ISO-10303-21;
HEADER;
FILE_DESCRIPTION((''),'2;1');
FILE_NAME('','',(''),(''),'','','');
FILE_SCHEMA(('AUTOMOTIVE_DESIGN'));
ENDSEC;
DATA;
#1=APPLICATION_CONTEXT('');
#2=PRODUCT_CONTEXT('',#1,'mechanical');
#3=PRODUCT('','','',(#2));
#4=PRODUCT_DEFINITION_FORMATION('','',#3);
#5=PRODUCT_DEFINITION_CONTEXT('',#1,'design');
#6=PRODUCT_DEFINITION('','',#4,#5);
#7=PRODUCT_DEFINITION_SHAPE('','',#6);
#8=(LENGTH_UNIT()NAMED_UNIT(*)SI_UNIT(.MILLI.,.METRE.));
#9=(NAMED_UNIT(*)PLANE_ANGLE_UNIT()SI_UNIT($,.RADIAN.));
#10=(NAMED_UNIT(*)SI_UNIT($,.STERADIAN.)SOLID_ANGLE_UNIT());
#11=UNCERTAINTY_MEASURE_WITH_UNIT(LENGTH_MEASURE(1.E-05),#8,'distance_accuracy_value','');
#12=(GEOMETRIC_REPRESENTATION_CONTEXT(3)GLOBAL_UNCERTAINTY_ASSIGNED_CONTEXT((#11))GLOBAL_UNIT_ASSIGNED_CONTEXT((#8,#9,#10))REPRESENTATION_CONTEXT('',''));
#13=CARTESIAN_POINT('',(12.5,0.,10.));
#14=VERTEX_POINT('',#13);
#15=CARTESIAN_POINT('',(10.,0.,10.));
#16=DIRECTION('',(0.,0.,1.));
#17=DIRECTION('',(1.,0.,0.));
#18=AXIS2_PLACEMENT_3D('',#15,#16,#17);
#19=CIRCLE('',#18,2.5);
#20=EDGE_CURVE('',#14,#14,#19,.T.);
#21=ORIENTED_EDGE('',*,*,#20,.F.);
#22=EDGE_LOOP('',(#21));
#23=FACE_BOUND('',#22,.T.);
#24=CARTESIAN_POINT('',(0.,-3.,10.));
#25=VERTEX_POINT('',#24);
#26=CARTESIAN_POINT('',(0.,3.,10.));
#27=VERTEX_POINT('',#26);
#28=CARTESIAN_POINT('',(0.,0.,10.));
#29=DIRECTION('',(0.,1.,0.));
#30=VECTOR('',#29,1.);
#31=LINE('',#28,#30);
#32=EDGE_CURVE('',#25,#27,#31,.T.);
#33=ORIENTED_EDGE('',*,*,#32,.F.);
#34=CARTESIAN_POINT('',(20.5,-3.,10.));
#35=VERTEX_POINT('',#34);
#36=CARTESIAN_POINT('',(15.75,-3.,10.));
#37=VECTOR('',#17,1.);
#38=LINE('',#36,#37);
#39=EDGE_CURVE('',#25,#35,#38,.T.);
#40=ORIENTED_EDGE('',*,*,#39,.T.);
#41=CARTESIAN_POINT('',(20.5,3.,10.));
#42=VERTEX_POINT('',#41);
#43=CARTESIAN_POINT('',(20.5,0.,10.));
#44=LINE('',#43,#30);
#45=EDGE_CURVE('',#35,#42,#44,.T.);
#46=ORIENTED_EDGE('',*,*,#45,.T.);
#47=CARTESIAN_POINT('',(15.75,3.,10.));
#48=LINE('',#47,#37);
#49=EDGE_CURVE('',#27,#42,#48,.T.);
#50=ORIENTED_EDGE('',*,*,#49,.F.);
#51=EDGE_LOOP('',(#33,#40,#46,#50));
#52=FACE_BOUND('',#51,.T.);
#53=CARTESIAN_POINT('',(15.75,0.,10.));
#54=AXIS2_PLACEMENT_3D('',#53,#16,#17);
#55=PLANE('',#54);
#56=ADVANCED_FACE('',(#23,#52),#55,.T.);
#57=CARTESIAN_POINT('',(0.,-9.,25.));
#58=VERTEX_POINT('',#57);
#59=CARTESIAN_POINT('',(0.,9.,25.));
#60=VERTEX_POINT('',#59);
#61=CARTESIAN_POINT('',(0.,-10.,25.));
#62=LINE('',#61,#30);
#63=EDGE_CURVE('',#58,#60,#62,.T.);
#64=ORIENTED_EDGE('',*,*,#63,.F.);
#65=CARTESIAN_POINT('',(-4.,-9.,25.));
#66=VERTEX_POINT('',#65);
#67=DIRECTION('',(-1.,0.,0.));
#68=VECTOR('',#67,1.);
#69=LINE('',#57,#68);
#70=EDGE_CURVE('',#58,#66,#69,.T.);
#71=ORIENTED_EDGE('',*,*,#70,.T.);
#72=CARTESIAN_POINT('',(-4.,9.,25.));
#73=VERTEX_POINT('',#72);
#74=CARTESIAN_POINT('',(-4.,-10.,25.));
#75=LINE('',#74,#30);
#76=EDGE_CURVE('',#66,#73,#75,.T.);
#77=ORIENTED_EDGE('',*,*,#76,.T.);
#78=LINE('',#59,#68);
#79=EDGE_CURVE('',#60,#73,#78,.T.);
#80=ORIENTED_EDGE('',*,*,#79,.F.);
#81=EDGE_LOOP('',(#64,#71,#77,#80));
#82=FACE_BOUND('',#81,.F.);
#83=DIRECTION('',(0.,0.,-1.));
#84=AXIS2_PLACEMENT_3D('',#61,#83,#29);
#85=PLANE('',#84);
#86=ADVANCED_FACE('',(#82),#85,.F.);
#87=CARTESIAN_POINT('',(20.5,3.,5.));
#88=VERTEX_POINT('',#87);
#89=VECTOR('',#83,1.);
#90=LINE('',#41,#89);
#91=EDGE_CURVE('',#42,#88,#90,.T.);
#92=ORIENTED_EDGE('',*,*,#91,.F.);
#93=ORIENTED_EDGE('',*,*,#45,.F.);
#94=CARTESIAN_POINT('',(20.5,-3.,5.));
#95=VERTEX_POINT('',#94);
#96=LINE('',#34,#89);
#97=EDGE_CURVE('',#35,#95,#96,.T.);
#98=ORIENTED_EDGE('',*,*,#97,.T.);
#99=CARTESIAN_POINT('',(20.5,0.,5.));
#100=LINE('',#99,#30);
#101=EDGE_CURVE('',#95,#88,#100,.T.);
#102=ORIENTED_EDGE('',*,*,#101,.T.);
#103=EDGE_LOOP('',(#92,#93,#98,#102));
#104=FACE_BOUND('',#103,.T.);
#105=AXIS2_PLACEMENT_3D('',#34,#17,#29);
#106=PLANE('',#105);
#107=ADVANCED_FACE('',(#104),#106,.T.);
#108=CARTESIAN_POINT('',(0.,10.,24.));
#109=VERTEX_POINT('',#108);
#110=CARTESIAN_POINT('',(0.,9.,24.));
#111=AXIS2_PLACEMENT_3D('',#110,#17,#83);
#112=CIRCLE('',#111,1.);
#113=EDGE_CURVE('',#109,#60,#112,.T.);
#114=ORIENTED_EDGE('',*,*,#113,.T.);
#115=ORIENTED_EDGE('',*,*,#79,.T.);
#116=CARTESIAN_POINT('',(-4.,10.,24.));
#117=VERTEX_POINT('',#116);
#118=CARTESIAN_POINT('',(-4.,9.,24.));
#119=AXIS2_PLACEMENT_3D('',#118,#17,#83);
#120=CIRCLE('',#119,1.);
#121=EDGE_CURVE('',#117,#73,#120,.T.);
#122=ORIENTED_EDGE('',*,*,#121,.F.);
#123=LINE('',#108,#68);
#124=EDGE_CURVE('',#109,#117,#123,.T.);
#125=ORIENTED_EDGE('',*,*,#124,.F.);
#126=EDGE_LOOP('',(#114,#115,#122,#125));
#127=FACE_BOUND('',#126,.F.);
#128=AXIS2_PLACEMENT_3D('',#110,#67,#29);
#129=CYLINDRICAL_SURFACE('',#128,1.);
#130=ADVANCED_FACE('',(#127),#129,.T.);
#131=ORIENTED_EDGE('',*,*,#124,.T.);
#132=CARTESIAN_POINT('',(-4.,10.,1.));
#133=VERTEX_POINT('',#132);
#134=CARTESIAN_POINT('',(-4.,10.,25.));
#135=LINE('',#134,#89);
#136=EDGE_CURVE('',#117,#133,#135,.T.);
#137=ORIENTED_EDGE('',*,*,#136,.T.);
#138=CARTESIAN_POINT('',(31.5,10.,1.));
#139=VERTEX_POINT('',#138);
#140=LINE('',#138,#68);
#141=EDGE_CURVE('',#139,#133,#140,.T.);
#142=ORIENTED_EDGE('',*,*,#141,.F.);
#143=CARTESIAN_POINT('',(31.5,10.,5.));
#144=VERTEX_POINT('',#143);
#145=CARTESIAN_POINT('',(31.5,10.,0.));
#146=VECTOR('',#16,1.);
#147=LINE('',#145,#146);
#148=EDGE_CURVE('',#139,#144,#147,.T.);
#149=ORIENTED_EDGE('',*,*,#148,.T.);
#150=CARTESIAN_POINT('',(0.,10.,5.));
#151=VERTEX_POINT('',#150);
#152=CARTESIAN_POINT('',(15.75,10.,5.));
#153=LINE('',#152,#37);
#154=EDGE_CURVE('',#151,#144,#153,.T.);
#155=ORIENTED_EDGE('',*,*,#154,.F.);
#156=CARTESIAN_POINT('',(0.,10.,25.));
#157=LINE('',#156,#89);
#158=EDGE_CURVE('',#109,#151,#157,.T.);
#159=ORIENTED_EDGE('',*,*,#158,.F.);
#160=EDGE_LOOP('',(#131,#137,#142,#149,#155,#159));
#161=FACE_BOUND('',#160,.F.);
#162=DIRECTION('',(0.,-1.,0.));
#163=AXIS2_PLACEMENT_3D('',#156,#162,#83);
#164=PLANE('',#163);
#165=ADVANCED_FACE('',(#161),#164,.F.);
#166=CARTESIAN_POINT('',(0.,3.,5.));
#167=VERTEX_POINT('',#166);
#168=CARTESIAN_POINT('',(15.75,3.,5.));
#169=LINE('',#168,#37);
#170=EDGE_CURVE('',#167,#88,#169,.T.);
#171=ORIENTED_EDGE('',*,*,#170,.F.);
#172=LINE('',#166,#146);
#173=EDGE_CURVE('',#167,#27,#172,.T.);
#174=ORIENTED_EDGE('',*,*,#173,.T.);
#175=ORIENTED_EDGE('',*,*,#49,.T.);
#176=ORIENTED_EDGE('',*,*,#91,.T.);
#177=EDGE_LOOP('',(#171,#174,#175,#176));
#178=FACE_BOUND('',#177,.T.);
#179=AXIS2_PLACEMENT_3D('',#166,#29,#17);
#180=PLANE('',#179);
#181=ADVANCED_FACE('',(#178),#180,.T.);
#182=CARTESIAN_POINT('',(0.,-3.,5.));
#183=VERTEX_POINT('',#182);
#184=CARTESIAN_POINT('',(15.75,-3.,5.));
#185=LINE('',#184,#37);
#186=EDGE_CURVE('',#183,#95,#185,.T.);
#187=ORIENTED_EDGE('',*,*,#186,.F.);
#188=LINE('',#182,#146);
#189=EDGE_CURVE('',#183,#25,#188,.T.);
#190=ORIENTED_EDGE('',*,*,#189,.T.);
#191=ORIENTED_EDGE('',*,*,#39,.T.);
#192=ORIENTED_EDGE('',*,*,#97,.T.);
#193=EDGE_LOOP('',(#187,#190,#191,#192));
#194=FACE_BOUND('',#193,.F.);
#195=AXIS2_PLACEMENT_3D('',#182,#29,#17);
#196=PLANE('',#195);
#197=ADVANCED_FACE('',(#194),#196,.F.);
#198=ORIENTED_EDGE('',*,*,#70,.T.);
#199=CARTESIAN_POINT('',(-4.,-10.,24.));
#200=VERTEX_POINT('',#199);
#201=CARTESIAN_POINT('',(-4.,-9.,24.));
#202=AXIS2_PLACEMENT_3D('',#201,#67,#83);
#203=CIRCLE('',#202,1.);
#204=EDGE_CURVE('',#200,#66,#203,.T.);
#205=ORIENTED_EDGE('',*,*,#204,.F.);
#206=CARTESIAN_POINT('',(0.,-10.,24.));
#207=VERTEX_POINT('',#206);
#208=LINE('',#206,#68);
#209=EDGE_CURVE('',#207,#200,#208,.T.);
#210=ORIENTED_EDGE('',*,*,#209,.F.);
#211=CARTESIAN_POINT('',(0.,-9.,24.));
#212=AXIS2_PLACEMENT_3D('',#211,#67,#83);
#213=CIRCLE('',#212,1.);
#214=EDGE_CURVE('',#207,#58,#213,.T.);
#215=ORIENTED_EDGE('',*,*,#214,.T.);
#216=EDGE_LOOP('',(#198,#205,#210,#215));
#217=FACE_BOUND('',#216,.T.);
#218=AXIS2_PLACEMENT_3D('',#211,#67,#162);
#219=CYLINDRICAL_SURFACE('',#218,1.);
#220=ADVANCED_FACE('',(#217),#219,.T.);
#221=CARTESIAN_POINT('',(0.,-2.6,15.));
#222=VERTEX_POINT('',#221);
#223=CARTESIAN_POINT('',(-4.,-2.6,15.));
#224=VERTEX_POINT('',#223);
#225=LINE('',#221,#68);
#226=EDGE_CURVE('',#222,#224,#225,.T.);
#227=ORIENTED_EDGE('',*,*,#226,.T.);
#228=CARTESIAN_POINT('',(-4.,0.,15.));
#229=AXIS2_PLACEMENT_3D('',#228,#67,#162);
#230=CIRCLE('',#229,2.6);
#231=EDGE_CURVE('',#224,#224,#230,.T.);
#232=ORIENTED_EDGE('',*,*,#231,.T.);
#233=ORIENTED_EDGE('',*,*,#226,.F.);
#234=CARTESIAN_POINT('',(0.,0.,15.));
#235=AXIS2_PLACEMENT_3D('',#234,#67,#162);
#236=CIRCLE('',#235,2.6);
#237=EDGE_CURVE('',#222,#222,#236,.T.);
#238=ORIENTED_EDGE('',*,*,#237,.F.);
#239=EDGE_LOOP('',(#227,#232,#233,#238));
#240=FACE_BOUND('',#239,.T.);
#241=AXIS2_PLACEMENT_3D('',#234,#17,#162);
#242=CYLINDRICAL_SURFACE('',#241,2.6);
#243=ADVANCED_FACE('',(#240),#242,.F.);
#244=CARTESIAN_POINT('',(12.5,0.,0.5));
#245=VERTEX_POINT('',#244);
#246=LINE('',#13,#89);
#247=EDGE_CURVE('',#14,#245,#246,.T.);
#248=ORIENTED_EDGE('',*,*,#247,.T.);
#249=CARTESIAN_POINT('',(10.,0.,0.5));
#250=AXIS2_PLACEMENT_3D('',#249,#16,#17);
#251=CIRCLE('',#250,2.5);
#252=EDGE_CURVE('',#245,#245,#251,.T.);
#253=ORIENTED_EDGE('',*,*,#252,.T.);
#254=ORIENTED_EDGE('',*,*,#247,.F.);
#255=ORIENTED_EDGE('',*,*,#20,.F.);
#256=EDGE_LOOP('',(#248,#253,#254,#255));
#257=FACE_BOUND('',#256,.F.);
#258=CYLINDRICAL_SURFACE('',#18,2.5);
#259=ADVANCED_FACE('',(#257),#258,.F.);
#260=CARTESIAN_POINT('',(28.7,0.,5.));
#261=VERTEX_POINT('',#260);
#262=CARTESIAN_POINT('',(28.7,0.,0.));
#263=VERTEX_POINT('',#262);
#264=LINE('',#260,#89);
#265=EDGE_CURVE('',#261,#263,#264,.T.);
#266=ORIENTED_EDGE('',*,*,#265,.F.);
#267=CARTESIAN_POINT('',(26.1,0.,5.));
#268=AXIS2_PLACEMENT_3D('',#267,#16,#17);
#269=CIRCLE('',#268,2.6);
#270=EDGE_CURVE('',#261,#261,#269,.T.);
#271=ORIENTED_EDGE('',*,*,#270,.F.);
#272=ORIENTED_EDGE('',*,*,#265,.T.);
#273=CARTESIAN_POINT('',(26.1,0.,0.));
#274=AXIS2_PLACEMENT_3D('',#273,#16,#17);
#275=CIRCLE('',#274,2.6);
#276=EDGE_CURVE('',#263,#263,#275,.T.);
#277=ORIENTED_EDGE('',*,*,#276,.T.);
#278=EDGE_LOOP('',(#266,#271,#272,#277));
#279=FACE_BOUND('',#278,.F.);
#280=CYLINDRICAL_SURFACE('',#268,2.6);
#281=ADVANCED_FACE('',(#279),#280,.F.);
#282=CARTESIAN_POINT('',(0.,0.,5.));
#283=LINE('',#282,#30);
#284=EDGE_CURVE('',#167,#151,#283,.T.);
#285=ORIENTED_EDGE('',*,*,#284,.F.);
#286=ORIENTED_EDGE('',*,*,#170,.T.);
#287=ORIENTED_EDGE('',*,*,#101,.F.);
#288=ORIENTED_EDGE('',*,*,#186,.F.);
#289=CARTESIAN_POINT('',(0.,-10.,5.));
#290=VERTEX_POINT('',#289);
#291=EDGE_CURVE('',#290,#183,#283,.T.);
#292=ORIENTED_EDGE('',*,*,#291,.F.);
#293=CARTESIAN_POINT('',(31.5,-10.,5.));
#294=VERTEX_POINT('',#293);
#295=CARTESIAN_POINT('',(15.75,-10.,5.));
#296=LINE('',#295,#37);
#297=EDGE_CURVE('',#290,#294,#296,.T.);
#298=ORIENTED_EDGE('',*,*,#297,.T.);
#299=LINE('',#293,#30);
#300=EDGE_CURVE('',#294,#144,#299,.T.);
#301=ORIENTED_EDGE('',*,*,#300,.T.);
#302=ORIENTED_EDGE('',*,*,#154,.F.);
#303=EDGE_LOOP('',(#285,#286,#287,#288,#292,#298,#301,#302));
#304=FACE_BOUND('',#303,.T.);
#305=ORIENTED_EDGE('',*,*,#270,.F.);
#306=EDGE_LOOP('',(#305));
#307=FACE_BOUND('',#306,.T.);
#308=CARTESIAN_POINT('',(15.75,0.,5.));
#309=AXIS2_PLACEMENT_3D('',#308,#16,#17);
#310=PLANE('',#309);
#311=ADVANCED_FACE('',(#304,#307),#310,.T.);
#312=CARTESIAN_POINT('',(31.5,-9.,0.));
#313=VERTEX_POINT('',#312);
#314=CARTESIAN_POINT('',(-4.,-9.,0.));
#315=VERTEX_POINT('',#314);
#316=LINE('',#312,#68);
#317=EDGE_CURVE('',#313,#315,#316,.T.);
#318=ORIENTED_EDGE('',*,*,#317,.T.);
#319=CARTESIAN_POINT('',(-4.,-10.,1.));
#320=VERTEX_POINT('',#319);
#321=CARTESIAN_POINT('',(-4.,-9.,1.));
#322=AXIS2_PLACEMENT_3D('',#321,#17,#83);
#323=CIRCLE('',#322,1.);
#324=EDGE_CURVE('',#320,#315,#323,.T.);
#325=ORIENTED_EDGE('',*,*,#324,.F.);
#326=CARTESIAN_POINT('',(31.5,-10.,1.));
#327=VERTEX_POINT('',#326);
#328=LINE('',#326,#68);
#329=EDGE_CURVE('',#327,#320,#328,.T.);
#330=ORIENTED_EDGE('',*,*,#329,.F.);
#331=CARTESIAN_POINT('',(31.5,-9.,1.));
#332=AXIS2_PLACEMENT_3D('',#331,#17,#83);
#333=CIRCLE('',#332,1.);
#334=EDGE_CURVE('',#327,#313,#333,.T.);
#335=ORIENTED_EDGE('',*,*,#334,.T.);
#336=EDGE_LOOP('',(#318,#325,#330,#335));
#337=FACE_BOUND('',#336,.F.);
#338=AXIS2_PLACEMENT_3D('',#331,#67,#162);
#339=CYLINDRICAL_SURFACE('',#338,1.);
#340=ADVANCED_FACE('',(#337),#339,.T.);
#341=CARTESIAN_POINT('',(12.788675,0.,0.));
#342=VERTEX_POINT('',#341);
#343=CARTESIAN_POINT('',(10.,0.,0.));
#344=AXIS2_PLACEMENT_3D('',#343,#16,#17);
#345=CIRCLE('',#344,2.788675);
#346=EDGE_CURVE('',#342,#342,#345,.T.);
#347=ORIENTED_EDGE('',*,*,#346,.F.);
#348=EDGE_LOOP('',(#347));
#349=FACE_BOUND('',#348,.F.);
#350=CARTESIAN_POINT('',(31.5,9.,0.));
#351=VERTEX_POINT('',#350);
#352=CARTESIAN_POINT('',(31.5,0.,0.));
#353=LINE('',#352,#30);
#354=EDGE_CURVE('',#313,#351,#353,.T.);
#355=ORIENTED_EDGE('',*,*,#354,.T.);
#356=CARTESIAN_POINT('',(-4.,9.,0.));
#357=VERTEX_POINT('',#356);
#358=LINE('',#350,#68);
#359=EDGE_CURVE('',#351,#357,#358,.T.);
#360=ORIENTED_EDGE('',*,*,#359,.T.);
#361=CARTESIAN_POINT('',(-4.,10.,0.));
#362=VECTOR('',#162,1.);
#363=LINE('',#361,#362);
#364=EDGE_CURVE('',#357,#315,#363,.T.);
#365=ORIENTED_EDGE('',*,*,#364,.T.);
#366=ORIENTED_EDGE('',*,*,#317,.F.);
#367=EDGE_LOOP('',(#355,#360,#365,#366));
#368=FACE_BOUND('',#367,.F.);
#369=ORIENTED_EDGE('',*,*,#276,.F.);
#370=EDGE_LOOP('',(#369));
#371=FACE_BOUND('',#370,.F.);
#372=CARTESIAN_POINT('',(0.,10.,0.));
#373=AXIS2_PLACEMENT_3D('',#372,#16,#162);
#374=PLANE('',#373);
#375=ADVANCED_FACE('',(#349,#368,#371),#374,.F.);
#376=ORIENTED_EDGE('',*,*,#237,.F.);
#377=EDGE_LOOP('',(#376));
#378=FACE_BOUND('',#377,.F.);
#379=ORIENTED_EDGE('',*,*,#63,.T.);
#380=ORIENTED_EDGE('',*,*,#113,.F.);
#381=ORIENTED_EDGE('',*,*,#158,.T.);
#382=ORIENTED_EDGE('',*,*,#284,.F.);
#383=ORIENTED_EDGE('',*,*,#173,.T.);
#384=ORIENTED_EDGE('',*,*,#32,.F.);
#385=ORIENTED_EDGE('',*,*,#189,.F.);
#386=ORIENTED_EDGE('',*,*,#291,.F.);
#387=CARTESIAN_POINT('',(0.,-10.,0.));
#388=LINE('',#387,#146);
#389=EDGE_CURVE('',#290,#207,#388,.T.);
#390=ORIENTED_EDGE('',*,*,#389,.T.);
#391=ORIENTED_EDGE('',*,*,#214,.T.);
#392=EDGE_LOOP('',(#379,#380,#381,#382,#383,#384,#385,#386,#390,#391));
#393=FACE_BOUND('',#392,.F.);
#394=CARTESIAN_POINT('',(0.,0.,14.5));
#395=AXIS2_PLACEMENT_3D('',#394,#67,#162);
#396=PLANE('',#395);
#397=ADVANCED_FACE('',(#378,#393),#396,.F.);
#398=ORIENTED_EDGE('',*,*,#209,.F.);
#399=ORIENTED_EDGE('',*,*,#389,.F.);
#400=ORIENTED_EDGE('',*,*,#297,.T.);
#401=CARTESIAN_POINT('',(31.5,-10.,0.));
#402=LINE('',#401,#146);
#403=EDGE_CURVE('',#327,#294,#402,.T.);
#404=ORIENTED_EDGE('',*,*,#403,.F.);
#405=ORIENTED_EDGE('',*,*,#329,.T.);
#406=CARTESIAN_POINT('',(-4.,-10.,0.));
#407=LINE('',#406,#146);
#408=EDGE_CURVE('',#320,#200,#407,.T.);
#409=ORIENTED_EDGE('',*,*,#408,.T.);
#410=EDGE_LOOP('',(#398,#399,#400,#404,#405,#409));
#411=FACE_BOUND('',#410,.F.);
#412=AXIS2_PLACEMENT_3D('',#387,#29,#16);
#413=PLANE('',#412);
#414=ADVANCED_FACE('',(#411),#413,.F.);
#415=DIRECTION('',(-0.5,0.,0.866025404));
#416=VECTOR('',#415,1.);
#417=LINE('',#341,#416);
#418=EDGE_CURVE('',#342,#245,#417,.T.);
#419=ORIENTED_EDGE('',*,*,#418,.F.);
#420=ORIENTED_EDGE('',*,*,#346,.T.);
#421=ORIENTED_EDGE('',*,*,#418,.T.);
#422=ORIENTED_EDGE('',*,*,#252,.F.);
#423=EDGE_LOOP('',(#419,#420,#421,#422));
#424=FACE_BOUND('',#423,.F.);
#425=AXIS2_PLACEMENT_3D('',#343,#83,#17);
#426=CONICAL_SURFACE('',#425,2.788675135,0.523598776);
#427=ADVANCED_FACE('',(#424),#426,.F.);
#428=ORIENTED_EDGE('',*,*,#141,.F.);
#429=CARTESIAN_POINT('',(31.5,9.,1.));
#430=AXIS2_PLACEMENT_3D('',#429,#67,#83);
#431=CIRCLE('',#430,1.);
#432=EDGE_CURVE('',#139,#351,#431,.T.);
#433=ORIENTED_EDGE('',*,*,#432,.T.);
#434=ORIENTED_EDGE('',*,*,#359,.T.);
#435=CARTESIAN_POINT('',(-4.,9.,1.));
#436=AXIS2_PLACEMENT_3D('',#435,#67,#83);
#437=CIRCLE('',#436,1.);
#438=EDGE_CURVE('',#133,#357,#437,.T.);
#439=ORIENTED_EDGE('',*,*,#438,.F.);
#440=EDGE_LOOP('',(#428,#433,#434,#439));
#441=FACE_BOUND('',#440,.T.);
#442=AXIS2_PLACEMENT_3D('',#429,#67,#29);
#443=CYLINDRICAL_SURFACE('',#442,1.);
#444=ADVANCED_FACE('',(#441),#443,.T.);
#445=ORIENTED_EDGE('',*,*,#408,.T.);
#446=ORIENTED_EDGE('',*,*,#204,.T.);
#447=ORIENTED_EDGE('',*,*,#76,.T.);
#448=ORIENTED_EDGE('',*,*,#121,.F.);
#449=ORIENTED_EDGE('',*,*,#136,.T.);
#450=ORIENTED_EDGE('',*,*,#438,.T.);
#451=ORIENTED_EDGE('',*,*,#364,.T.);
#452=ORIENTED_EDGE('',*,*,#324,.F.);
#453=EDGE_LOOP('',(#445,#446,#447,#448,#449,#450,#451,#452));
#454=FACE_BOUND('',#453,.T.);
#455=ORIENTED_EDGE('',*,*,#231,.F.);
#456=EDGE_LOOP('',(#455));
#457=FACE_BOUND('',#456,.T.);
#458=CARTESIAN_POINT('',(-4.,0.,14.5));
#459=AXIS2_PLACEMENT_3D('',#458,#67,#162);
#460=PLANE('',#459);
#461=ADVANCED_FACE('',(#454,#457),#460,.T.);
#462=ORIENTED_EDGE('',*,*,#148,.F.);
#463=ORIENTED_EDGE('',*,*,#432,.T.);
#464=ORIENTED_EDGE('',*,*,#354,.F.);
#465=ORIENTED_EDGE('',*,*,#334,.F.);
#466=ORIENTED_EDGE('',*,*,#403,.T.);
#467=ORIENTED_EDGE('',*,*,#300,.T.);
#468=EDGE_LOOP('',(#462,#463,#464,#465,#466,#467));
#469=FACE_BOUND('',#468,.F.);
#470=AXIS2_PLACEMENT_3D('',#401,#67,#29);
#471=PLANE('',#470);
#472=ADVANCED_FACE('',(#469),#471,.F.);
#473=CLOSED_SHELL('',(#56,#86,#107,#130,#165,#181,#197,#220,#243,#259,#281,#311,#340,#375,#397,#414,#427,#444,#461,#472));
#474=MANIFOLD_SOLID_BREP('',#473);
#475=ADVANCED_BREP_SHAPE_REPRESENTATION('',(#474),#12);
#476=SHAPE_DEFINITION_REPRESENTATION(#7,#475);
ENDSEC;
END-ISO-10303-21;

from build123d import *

# Parameters (mm, degrees)
F0_W      = 31.5
F0_H      = 20
F1_DEPTH  = 5
F2_W      = 31.5
F2_H      = 6
F3_DEPTH  = 5
F4_R      = 2.5
F5_DEPTH  = 25
F6_W      = 11.2
F6_H      = 6
F7_DEPTH  = 5
F8_R      = 2.6
F9_DEPTH  = 5
F10_R     = 2.6
F11_DEPTH = 4
F12_R     = 1


# Not quite as in the source:
# - a fillet or chamfer that OpenCascade refuses, or shapes differently, is made with other operations: its cross-section is extruded or revolved along the edge and cut away or added
# - a feature names something its author has since deleted; it is built from what else it names


with BuildPart() as f1:
    # F0 (on Top) → F1 (new body)
    with BuildSketch(Plane.XY):
        with Locations((15.75, 0)):
            Rectangle(F0_W, F0_H)
    extrude(amount=F1_DEPTH)

    # F2 (on face) → F3 (join)
    with BuildSketch(Plane.XY.offset(5)):
        with Locations((15.75, 0)):
            Rectangle(F2_W, F2_H)
    extrude(amount=F3_DEPTH)

    # F4 (on face) → F5 (cut)
    with BuildSketch(Plane.XY.offset(10)):
        with Locations((10, 0)):
            Circle(F4_R)
    extrude(amount=-F5_DEPTH, mode=Mode.SUBTRACT)

    # F6 (on face) → F7 (cut, through all)
    with BuildSketch(Plane.XY.offset(10)):
        with Locations((26.1, 0)):
            Rectangle(F6_W, F6_H)
    extrude(amount=-F7_DEPTH, mode=Mode.SUBTRACT)

    # F8 (on face) → F9 (cut, through all)
    with BuildSketch(Plane.XY.offset(5)):
        with Locations((26.1, 0)):
            Circle(F8_R)
    extrude(amount=-F9_DEPTH, mode=Mode.SUBTRACT)

    # F10 (on face) → F11 (join)
    with BuildSketch(Plane(origin=(0, 0, 0), x_dir=(0, -1, 0), z_dir=(-1, 0, 0))):
        Polygon((-10, 25), (-10, 5), (-3, 5), (-3, 10), (3, 10), (3, 5), (10, 5), (10, 25), align=None)
        with Locations((0, 15)):
            Circle(F10_R, mode=Mode.SUBTRACT)
        Polygon((-10, 5), (-10, 0), (10, 0), (10, 5), (3, 5), (3, 10), (-3, 10), (-3, 5), align=None)
    extrude(amount=F11_DEPTH)

    # F12
    f12_edges = [f1.edges().sort_by_distance(p)[0] for p in [
        (-2, -10, 25),
        (-2, 10, 25),
        (13.75, -10, 0),
        (13.75, 10, 0),
    ]]
    fillet(f12_edges, radius=F12_R)

    # F13: chamfer of 0.5 x 0.2886751346 on 1 edges, made by hand

    # F13_s1 → F13_t2 (revolve, cut)
    with BuildSketch(Plane.XZ):
        Polygon((12.7886751346, 0), (12.5, 0.5), (12.5, 0), align=None)
    revolve(axis=Axis((10, 0, 0), (0, 0, 1)), mode=Mode.SUBTRACT)


solid = f1.part
